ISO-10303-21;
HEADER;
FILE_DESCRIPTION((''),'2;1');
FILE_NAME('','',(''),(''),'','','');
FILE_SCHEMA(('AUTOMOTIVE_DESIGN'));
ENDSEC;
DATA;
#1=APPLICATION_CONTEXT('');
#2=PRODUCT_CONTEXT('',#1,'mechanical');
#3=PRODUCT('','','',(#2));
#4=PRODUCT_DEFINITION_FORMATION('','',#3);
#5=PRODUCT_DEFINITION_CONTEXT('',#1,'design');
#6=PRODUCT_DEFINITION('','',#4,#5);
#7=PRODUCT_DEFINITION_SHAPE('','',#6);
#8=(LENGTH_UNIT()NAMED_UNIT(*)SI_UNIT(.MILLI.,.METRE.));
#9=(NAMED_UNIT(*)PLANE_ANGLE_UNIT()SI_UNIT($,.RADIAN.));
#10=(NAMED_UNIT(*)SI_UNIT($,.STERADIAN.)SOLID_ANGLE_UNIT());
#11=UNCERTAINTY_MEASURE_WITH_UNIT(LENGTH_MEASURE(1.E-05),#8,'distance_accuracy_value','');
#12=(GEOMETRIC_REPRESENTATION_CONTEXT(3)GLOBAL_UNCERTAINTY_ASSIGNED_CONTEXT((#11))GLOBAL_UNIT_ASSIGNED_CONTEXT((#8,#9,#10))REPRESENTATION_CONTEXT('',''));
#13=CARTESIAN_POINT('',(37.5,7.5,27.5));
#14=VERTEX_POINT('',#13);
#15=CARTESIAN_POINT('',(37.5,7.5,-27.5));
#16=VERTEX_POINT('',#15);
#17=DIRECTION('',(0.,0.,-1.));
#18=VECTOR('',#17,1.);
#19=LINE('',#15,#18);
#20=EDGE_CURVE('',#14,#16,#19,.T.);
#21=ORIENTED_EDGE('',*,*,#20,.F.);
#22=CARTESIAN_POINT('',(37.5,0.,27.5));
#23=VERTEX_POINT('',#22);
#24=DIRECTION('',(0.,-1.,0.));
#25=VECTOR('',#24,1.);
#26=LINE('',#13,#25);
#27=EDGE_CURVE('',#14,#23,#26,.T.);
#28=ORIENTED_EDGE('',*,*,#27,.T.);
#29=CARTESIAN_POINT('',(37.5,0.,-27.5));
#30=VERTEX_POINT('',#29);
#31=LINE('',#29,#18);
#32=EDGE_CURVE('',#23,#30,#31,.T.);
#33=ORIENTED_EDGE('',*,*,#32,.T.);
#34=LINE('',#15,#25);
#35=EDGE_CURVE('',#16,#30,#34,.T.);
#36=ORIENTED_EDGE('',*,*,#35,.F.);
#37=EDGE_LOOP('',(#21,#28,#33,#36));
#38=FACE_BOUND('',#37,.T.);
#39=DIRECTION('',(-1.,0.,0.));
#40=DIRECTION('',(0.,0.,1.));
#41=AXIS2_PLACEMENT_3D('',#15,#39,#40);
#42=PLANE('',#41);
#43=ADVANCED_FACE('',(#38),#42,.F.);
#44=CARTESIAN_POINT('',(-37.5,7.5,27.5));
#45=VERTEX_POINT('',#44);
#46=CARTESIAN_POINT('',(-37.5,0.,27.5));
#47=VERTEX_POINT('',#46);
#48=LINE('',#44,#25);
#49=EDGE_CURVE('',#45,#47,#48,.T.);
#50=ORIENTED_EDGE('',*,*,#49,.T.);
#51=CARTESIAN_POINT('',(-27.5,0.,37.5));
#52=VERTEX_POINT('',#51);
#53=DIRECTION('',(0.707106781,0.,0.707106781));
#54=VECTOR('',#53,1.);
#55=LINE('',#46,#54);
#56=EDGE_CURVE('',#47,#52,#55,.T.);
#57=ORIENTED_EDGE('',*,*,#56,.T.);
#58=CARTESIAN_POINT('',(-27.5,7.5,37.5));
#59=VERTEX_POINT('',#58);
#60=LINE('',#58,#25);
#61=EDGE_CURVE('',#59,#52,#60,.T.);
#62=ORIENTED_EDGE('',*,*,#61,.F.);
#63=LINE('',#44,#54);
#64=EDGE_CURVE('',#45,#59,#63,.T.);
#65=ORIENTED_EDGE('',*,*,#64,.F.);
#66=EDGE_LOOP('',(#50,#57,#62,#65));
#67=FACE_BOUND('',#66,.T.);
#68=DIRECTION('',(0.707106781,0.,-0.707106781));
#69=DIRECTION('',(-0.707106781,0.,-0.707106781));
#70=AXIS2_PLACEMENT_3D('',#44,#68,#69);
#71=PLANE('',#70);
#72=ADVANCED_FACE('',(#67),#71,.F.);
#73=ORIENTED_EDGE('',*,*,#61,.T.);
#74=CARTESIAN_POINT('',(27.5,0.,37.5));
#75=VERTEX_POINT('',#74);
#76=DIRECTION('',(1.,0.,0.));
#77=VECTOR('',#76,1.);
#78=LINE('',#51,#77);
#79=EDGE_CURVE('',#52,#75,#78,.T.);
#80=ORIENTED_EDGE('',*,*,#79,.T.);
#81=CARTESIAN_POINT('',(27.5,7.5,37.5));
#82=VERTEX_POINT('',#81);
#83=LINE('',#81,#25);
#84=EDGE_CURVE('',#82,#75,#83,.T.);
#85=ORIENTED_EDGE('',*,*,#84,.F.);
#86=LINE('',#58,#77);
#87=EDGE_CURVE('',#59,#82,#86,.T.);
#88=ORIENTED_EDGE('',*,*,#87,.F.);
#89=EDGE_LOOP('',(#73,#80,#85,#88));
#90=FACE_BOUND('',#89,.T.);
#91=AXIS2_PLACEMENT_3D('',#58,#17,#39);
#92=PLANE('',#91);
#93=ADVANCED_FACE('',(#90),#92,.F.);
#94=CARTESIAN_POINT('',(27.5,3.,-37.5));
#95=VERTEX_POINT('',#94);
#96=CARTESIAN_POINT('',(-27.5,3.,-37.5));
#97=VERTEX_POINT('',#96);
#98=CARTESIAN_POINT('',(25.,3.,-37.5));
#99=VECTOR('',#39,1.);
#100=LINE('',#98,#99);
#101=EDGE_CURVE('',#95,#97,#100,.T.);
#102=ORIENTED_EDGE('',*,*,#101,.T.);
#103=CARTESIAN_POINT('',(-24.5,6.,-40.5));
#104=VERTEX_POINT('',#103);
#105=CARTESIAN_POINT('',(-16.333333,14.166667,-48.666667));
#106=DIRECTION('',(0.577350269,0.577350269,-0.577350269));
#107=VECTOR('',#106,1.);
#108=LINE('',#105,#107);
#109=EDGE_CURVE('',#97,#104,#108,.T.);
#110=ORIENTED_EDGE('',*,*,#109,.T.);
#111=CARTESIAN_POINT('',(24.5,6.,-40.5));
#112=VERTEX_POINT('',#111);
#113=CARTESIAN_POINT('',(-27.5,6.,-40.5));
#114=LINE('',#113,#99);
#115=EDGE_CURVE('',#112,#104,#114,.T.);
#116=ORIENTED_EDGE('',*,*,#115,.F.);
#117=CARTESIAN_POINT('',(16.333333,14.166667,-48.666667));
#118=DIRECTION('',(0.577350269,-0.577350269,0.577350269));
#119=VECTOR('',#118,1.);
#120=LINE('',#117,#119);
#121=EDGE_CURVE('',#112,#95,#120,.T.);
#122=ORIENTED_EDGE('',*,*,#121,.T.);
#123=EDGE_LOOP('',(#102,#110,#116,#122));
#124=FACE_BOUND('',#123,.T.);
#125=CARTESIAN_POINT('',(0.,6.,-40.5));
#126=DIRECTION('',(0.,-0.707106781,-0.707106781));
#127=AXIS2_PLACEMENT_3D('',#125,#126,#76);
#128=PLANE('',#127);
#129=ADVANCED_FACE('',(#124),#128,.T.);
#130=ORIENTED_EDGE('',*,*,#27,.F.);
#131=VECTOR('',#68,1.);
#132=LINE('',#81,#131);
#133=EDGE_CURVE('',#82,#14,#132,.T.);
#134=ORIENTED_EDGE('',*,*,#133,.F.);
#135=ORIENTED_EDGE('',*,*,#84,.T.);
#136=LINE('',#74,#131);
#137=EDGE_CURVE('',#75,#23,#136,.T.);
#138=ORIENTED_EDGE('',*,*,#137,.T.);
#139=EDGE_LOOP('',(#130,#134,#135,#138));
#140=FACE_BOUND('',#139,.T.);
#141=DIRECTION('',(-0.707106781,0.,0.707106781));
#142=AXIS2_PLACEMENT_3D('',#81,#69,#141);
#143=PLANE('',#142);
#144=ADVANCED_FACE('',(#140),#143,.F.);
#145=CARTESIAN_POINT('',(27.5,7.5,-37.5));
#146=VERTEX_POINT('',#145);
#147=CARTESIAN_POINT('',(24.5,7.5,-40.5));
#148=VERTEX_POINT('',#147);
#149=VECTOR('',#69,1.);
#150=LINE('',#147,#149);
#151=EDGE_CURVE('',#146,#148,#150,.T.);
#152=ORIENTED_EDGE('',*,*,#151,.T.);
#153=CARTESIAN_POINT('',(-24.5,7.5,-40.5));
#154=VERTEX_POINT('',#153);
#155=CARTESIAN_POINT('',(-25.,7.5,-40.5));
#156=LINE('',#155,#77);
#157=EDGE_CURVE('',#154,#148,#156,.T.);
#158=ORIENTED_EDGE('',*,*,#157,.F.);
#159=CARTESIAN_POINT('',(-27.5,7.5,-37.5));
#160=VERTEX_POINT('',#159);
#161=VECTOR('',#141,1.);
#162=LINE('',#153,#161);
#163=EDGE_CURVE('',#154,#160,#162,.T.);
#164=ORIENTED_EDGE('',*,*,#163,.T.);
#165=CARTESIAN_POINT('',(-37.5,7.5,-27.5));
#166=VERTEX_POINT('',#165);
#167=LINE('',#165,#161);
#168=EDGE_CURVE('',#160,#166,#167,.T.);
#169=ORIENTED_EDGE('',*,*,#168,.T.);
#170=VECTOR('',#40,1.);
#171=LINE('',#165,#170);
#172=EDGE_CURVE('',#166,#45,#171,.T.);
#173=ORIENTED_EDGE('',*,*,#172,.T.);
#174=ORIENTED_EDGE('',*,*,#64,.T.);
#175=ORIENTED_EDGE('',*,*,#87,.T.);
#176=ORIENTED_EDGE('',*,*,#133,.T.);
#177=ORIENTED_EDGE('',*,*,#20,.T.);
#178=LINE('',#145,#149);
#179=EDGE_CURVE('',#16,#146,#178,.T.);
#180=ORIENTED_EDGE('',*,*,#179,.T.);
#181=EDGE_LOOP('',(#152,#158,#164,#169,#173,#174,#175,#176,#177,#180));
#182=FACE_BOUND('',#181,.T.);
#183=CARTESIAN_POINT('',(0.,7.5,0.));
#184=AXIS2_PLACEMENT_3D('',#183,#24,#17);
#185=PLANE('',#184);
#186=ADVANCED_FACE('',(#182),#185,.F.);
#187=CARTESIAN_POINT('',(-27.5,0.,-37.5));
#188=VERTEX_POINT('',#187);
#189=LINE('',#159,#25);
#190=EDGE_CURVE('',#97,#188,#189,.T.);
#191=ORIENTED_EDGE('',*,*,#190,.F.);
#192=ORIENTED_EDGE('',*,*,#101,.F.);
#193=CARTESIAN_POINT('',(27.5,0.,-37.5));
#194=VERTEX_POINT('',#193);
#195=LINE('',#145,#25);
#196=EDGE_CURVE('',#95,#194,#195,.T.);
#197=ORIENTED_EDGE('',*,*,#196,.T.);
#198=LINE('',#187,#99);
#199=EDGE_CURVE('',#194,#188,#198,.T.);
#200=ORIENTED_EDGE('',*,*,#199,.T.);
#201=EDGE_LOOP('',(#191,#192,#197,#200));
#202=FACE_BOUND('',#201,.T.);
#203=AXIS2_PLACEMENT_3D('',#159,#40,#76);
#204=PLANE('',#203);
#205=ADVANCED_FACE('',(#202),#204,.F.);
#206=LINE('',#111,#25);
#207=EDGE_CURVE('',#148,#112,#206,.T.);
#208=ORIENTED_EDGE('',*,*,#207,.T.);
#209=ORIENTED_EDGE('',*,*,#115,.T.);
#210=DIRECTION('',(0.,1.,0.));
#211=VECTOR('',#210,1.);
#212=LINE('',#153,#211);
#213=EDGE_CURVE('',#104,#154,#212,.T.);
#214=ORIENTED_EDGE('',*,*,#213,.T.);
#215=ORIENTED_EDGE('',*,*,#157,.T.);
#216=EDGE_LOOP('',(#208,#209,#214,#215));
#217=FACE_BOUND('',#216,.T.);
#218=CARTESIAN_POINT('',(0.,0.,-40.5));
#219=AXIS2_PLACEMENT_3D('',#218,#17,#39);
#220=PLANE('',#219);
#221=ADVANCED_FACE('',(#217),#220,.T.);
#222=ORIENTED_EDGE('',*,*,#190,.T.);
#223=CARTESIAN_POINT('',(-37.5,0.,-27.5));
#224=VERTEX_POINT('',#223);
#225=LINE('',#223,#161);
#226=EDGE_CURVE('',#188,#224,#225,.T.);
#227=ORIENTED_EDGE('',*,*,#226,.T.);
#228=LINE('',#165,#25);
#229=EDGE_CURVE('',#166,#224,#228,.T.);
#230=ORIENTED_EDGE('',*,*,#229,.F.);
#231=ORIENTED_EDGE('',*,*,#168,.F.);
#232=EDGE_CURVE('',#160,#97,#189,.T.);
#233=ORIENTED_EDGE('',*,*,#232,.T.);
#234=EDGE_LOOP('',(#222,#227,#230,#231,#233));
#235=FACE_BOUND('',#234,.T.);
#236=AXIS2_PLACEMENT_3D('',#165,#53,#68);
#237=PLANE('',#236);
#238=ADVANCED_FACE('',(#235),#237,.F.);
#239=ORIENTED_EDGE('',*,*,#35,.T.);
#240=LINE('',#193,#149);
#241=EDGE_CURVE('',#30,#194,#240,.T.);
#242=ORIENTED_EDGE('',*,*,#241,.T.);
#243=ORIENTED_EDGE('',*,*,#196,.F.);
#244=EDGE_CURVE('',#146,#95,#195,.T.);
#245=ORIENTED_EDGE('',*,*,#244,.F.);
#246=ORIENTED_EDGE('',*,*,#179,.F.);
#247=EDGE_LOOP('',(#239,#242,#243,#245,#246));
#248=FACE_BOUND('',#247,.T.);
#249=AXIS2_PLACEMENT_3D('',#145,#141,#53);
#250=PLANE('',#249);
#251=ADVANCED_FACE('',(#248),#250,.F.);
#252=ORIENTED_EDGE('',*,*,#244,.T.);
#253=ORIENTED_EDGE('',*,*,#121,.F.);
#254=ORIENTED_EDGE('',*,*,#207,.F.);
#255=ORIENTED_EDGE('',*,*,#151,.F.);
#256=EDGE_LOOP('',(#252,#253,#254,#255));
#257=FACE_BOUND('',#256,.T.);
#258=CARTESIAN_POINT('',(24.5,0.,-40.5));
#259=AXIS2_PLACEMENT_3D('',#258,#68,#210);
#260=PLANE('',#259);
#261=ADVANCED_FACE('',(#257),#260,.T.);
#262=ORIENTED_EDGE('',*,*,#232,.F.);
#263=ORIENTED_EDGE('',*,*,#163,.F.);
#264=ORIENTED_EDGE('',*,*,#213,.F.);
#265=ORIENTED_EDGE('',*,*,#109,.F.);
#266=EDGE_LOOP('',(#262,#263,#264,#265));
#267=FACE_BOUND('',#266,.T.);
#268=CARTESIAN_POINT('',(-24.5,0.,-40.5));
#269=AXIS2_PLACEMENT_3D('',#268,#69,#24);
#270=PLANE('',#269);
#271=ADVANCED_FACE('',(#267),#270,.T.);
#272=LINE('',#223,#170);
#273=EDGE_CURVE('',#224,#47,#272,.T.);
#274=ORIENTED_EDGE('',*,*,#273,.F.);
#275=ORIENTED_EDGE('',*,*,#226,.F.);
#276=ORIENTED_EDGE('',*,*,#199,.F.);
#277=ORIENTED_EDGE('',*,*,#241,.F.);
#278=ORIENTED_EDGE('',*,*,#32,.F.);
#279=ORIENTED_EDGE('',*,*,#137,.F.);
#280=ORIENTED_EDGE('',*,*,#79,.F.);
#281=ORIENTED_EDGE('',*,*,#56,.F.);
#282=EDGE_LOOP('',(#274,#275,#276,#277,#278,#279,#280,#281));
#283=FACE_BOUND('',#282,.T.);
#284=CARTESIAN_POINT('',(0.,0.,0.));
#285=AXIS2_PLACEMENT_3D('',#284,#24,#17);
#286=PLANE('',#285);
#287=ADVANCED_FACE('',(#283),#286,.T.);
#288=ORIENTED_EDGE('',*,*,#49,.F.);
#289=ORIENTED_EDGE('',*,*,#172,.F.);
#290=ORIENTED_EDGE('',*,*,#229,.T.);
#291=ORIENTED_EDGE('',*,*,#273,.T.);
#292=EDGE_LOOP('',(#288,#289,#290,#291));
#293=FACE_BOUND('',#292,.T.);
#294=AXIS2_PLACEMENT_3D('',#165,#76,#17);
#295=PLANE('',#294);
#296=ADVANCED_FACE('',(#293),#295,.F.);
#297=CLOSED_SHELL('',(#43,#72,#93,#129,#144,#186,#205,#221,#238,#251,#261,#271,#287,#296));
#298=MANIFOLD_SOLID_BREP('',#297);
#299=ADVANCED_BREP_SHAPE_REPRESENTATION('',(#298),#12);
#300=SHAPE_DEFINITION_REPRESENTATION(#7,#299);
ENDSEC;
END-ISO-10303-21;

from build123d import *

# Parameters (mm, degrees)
BOSS_EXTRUDE1_DEPTH = 7.5
BOSS_EXTRUDE4_DEPTH = 3
CHAMFER7_SIZE       = 3
CHAMFER8_SIZE       = 3


with BuildPart() as part:
    # Sketch1 → Boss-Extrude1 (new body)
    with BuildSketch(Plane(origin=(0, 0, 0), x_dir=(1, 0, 0), z_dir=(0, 1, 0))):
        Polygon((-37.5, 27.5), (-27.5, 37.5), (27.5, 37.5), (37.5, 27.5), (37.5, -27.5), (27.5, -37.5), (-27.5, -37.5), (-37.5, -27.5), align=None)
    extrude(amount=BOSS_EXTRUDE1_DEPTH)

    # Sketch8 → Boss-Extrude4 (add)
    with BuildSketch(Plane(origin=(0, 0, -37.5), x_dir=(-1, 0, 0), z_dir=(0, 0, -1))):
        Polygon((-25, 3), (25, 3), (27.5, 3), (27.5, 7.5), (25, 7.5), (-25, 7.5), (-27.5, 7.5), (-27.5, 3), align=None)
    extrude(amount=BOSS_EXTRUDE4_DEPTH)

    # Chamfer7
    chamfer7_edges = [part.edges().sort_by_distance(p)[0] for p in [
        (0, 3, -40.5),
    ]]
    chamfer(chamfer7_edges, length=CHAMFER7_SIZE - 0.0001)  # a hair under: the kernel refuses the full size

    # Chamfer8
    chamfer8_edges = [part.edges().sort_by_distance(p)[0] for p in [
        (-27.5, 6.74995, -40.5),
        (27.5, 6.74995, -40.5),
    ]]
    chamfer(chamfer8_edges, length=CHAMFER8_SIZE - 0.0001)  # a hair under: the kernel refuses the full size


solid = part.part
